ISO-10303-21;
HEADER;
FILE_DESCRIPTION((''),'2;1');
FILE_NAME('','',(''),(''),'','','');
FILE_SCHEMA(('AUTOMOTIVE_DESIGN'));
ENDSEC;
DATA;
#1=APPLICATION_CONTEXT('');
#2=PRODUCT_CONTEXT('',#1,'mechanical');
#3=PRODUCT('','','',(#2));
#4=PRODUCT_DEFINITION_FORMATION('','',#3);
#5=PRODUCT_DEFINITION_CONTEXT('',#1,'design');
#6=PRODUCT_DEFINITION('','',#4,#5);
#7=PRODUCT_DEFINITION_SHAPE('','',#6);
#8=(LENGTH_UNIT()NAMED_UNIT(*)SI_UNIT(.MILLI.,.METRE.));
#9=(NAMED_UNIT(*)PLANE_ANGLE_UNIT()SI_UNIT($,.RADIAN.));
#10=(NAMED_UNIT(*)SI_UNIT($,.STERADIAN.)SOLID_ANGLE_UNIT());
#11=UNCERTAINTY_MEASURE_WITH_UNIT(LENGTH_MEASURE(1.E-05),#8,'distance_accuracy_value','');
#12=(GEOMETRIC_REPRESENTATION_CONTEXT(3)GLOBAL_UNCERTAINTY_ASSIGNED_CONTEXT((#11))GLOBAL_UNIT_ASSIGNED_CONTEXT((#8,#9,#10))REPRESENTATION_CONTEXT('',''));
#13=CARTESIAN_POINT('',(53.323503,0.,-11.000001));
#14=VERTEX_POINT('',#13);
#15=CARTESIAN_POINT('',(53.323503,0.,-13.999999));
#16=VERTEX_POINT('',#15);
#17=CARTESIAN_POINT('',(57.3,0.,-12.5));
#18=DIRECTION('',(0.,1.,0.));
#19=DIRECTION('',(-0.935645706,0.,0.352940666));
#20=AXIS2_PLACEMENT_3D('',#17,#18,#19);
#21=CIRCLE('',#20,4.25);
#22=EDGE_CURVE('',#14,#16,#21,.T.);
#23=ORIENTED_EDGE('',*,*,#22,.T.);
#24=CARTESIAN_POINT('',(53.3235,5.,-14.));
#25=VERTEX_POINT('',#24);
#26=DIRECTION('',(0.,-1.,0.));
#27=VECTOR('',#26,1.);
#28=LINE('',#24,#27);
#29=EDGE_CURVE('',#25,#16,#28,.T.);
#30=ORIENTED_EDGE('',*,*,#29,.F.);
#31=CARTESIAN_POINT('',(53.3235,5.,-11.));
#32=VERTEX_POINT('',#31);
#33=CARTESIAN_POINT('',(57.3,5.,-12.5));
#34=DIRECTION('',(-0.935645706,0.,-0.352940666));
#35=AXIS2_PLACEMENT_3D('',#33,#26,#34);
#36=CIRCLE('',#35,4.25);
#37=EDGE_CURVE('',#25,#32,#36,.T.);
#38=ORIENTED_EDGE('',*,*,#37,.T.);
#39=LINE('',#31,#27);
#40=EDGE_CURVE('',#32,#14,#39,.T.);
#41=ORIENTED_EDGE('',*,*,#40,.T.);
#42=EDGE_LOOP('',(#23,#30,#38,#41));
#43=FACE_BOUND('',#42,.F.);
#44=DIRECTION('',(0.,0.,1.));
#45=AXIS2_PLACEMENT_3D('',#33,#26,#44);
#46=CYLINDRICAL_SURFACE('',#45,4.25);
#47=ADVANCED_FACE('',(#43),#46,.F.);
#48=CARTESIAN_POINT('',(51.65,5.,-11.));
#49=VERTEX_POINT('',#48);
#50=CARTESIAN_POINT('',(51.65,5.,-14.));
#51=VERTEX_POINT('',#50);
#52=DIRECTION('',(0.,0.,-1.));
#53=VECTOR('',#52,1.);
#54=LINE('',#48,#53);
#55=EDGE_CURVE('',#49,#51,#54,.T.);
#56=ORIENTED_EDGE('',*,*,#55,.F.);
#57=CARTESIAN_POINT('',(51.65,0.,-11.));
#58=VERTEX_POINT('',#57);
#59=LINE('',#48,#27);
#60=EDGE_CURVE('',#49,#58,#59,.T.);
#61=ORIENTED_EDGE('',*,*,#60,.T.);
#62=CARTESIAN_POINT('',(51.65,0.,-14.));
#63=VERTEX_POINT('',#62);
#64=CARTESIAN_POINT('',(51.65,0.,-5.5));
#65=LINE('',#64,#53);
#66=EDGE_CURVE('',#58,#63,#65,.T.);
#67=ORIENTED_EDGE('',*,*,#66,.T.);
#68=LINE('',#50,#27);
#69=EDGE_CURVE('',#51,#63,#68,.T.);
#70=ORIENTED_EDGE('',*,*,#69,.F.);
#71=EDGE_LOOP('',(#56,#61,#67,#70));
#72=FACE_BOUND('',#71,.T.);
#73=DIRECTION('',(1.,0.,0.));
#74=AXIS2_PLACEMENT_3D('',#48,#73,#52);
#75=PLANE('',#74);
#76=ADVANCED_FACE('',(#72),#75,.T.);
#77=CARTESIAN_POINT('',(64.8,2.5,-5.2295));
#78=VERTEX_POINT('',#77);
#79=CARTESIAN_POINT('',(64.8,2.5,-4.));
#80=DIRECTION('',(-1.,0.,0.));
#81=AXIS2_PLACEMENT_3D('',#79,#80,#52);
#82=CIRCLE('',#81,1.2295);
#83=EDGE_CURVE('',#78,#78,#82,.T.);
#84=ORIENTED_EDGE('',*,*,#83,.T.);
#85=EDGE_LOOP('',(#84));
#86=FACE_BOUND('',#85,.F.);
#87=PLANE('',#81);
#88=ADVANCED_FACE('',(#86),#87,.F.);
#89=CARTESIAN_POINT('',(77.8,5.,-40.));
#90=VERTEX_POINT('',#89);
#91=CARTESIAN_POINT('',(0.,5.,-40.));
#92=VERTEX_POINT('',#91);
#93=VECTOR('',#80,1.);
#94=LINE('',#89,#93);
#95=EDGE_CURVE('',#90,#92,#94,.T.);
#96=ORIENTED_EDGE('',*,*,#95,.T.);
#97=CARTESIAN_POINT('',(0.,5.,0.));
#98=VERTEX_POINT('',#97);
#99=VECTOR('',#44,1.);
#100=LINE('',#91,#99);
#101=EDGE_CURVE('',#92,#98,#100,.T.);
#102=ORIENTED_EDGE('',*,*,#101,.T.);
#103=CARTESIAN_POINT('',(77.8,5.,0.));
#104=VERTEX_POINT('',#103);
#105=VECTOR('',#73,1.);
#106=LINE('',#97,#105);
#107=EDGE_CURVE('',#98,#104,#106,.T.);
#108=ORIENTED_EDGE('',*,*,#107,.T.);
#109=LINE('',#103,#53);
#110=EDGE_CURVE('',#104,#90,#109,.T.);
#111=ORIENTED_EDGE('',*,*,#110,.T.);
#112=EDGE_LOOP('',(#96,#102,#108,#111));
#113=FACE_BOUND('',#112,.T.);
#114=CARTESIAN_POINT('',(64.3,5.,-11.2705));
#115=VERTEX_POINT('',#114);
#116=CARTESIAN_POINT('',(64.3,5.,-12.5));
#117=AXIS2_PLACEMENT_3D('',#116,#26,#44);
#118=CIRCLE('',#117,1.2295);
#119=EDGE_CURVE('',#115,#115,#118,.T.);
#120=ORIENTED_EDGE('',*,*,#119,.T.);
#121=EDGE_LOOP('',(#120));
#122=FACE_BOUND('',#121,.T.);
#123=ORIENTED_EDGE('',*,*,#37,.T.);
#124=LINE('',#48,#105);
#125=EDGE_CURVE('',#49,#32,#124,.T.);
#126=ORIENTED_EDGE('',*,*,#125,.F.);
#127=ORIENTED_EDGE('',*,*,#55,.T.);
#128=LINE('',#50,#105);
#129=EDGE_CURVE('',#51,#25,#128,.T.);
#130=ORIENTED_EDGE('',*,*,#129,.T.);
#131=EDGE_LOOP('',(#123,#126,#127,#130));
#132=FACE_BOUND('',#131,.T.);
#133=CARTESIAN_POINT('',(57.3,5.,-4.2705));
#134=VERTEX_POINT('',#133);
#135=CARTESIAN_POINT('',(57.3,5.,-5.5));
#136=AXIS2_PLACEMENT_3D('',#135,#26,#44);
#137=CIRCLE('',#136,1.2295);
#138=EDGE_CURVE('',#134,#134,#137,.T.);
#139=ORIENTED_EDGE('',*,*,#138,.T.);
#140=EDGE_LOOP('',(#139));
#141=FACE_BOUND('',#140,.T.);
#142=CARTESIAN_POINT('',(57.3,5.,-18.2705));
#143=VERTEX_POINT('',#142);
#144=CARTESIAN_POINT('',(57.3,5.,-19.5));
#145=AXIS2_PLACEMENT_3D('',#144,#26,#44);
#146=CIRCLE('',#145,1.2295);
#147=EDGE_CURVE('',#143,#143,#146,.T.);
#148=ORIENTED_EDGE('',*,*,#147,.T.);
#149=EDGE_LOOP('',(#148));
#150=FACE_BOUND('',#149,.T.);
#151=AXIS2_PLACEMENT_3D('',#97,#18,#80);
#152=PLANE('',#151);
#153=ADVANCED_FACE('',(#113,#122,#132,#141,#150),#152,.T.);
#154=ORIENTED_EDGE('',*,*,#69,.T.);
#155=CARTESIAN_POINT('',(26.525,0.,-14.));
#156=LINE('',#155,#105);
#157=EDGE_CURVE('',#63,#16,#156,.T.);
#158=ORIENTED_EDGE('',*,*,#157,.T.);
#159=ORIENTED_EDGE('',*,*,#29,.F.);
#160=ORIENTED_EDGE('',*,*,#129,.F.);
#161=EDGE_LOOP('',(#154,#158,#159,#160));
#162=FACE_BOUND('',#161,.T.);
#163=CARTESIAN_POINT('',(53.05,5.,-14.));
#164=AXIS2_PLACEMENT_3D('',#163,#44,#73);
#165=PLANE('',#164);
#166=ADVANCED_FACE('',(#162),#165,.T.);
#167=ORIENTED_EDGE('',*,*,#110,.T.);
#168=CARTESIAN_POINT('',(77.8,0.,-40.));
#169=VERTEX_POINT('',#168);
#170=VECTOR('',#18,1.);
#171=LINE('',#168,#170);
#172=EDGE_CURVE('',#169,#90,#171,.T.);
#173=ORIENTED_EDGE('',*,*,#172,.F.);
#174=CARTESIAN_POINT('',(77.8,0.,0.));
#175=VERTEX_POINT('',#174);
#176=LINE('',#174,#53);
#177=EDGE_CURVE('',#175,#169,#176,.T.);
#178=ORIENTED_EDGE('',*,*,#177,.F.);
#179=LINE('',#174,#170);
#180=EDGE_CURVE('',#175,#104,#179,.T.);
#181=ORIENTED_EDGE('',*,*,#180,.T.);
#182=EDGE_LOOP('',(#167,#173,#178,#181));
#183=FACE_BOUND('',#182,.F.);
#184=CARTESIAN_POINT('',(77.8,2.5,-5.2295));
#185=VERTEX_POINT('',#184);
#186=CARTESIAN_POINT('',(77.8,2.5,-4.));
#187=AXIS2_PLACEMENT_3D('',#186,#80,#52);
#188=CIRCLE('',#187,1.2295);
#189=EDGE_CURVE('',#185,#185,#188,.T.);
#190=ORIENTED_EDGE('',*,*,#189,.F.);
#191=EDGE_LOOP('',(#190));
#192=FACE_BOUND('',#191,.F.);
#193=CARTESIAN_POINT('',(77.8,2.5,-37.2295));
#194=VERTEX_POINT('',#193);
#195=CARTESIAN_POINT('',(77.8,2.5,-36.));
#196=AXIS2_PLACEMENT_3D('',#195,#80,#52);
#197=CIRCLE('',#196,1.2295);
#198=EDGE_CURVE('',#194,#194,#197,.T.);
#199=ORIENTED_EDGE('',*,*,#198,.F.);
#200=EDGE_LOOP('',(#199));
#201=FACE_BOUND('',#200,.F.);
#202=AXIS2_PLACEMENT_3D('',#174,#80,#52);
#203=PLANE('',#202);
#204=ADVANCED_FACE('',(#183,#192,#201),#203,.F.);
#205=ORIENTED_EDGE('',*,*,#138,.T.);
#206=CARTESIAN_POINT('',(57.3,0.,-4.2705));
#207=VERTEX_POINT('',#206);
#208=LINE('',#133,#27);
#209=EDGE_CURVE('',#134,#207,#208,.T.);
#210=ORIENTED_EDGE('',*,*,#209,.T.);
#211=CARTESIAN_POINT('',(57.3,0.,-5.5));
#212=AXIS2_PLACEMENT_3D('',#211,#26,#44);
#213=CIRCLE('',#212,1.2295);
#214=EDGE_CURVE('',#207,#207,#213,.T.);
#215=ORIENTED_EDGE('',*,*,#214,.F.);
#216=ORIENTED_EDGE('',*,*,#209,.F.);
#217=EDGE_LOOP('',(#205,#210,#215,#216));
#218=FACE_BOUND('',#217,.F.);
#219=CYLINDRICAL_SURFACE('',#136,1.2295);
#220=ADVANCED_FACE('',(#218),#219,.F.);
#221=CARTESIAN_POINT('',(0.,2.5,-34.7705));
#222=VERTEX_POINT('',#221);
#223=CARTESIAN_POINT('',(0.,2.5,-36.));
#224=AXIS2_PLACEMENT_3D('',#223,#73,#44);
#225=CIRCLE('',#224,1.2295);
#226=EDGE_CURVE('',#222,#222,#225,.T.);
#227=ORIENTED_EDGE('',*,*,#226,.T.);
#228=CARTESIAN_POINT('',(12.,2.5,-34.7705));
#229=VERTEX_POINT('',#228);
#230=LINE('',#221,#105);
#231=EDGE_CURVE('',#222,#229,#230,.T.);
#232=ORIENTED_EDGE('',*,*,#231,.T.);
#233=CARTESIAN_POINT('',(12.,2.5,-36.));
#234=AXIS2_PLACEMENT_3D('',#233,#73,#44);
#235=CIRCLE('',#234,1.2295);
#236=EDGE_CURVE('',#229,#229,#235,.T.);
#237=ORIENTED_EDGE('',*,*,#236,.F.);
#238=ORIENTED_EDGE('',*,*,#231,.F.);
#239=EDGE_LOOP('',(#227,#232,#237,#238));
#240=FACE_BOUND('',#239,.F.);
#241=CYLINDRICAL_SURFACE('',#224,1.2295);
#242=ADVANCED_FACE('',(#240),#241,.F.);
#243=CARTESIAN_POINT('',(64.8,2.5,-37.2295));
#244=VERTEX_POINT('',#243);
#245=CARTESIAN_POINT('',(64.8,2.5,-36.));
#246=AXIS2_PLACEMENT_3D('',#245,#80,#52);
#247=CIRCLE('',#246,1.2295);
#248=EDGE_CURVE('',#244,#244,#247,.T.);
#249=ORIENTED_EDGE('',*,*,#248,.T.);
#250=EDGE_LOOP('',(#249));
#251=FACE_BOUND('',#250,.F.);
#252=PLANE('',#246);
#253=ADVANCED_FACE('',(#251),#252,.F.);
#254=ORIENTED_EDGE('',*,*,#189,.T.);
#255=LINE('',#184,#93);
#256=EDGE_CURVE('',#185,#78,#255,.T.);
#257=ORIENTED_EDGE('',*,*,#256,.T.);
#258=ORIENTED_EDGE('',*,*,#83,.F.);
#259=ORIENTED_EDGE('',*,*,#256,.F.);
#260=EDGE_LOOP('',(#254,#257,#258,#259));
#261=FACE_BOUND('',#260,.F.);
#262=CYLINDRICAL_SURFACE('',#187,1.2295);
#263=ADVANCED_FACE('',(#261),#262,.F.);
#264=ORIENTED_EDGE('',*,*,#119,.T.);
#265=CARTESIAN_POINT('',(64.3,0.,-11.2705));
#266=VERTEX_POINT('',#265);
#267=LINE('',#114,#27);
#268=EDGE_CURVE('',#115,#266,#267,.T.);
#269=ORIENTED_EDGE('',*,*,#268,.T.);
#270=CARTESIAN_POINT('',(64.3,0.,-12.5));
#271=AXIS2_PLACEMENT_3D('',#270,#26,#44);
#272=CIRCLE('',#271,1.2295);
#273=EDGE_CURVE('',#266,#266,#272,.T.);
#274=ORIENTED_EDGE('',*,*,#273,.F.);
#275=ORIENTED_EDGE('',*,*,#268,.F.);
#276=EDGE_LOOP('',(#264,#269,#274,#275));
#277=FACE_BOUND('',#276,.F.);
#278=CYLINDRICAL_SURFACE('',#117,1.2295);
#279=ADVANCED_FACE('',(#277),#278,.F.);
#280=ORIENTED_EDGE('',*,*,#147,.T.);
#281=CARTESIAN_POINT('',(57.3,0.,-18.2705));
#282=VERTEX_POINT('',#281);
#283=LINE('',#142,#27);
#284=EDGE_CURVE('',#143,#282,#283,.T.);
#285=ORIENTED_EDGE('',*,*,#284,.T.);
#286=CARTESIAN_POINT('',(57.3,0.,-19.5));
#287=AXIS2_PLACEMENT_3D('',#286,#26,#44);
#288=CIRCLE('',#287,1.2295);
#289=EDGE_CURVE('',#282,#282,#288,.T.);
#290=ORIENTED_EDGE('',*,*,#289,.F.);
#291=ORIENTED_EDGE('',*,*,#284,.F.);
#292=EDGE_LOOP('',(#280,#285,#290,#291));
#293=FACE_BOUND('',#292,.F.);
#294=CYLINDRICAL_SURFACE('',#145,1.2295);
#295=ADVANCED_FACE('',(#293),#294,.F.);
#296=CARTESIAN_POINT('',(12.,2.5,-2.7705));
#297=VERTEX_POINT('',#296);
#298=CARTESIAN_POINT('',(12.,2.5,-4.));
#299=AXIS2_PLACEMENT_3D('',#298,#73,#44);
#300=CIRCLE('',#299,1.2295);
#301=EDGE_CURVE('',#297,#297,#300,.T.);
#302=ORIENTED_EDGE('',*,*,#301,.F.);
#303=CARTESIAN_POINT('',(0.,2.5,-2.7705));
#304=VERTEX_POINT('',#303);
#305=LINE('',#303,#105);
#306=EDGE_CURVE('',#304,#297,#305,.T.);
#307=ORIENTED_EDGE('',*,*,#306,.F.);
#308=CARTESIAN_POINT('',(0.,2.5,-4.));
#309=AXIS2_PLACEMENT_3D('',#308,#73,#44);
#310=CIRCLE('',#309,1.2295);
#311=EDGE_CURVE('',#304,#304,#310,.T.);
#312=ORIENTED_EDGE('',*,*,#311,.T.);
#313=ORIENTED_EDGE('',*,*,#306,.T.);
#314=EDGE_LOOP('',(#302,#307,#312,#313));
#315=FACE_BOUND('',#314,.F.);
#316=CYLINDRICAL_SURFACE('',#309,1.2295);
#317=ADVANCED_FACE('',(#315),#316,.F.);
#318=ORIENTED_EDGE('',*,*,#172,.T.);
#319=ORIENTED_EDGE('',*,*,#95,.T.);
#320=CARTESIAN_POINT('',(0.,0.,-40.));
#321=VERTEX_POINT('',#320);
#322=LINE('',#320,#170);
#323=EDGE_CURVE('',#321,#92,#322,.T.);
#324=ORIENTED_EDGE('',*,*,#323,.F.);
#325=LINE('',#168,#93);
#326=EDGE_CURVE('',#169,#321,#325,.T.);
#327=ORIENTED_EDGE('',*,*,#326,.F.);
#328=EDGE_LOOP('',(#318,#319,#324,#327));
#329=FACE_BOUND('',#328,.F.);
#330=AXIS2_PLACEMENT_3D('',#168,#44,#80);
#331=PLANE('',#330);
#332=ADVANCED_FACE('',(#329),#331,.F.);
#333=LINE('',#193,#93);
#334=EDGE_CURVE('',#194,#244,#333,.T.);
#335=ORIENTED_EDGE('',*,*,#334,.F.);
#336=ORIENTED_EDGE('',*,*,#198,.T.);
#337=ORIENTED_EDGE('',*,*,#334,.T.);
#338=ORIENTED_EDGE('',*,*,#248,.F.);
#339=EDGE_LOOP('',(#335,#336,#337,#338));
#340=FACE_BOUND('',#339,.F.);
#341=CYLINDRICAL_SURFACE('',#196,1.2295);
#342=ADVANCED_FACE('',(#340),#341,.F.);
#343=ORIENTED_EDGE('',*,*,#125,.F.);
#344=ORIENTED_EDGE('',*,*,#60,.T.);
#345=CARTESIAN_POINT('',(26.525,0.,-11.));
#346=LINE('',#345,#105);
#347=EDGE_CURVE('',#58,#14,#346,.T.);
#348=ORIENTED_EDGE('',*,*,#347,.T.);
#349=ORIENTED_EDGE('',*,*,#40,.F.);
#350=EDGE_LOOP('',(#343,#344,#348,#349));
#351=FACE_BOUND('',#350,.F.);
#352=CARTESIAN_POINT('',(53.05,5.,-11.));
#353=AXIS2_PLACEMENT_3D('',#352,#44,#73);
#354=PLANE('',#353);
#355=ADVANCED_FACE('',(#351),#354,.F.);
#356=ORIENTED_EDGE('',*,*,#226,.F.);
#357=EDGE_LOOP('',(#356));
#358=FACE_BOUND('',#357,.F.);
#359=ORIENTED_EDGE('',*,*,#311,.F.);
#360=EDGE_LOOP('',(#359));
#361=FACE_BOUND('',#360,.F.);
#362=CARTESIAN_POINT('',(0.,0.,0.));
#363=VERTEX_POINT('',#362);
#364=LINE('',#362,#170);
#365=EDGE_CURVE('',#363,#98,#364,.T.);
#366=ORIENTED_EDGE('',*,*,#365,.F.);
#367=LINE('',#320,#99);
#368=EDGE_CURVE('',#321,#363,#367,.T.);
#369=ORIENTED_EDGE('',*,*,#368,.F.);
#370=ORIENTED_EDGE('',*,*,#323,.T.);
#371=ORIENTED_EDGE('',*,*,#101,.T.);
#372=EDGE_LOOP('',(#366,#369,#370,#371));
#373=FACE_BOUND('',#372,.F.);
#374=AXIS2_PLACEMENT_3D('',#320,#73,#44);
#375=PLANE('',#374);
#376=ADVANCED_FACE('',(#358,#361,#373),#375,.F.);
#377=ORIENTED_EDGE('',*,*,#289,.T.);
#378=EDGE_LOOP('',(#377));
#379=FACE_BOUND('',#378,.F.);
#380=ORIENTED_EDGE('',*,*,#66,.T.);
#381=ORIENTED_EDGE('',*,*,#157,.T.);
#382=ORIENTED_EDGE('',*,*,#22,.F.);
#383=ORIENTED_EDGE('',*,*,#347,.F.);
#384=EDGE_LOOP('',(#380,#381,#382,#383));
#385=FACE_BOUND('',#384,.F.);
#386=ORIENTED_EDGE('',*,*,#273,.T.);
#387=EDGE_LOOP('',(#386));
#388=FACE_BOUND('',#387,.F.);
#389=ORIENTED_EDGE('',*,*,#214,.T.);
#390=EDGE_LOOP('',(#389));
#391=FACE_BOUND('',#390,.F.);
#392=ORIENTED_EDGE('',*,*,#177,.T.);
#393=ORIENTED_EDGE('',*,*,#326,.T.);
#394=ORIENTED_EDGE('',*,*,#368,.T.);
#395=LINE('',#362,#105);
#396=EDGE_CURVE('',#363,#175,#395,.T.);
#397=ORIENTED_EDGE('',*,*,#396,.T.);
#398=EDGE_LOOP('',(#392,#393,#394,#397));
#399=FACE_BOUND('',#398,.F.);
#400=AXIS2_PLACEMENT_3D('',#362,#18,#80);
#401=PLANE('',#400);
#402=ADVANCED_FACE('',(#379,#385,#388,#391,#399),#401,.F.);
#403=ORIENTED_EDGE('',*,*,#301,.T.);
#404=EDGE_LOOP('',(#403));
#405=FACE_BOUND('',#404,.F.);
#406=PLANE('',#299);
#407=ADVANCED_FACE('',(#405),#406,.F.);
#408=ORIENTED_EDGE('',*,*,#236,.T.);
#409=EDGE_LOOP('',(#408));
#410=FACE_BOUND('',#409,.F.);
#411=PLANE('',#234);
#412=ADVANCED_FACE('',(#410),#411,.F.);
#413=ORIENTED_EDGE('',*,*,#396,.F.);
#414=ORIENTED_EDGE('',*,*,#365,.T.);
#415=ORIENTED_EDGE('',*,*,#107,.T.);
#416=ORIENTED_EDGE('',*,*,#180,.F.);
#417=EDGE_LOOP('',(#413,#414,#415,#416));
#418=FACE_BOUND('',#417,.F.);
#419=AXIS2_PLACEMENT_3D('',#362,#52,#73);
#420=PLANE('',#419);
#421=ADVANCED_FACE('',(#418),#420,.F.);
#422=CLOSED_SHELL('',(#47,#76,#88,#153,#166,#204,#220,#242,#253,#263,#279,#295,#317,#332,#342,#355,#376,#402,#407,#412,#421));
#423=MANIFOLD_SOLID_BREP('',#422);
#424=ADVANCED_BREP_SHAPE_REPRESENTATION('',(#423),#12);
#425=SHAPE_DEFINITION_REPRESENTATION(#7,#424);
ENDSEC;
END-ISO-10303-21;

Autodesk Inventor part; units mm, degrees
ref_plane "YZ Plane" through (0, 0, 0) normal (1, 0, 0) x (0, 1, 0)
ref_plane "XZ Plane" through (0, 0, 0) normal (0, 1, 0) x (-1, 0, 0)
ref_plane "XY Plane" through (0, 0, 0) normal (0, 0, 1) x (1, 0, 0)
sketch "スケッチ2" plane through (0, 0, 0) normal (0, 1, 0) x (-1, 0, 0)
  line L0 (0, 0) -> (-77.8, 0)
  line L1 (-77.8, 0) -> (-77.8, -40)
  line L2 (-77.8, -40) -> (0, -40)
  line L3 (0, -40) -> (0, 0)
  dimension "d0" = 77.8
  dimension "d1" = 40
extrude "押し出し1" add sketch "スケッチ2" along normal blind 5
sketch "スケッチ4" plane through (0, 0, -40) normal (-1, 0, 0) x (0, 0, 1)
  line L0 (0, 0) -> (0, 5) construction
  line L1 (0, 2.5) -> (40, 2.5) construction
  line L2 (40, 0) -> (40, 5) construction
  point P0 (4, 2.5)
  point P1 (36, 2.5)
  dimension "d4" = 4
  dimension "d5" = 4
hole "穴1" at (0, 2.5, -36) at (0, 2.5, -4) direction (1, 0, 0) diameter 2.459 depth 12 thread size "M3x0.5" class "6H" standard "ISO Metric profile"
sketch "スケッチ5" plane through (77.8, 0, 0) normal (1, 0, 0) x (0, 0, -1)
  line L0 (0, 0) -> (0, 5) construction
  line L1 (0, 2.5) -> (39.9198, 2.5) construction
  circle A0 centre (4, 2.5) radius 1.2295 construction
  circle A1 centre (36, 2.5) radius 1.2295 projected
  point P0 (4, 2.5)
  point P1 (36, 2.5)
hole "穴2" at (77.8, 2.5, -4) at (77.8, 2.5, -36) direction (-1, 0, 0) diameter 2.459 depth 13 thread size "M3x0.5" class "6H" standard "ISO Metric profile"
sketch "スケッチ6" plane through (0, 5, 0) normal (0, 1, 0) x (1, 0, 0)
  line L0 (77.8, 0) -> (77.8, 40) construction
  line L1 (0, 40) -> (0, 0) construction
  line L2 (0, 0) -> (77.8, 0) construction
  point P0 (57.3, 12.5)
  dimension "d20" = 20.5
  dimension "d21" = 12.5
hole "穴3" at (57.3, 5, -12.5) direction (0, -1, 0) diameter 8.5 end through all
sketch "スケッチ7" plane through (0, 5, 0) normal (0, 1, 0) x (1, 0, 0)
  line L0 (77.8, 0) -> (77.8, 40) construction
  line L1 (77.8, 28.3) -> (0, 28.3) construction
  line L2 (0, 40) -> (0, 0) construction
  circle A0 centre (57.3, 12.5) radius 4.25 construction
  point P0 (67.8, 28.3)
  point P1 (46.8, 28.3)
  dimension "d29" = 15.8
  dimension "d30" = 10.5
  dimension "d31" = 10.5
hole "穴4" [suppressed]
sketch "スケッチ8" plane through (0, 5, 0) normal (0, 1, 0) x (1, 0, 0)
  circle A0 centre (57.3, 12.5) radius 4.25 construction
  circle A1 centre (57.3, 12.5) radius 7 construction
  point P0 (0, 0)
  point P1 (64.3, 12.5)
  point P2 (57.3, 19.5)
  point P3 (57.3, 5.5)
  dimension "d39" = 14
hole "穴5" at (64.3, 5, -12.5) at (57.3, 5, -19.5) at (57.3, 5, -5.5) direction (0, -1, 0) diameter 2.459 end through all thread size "M3x0.5" class "6H" standard "ISO Metric profile"
sketch "スケッチ9" plane through (0, 5, 0) normal (0, 1, 0) x (1, 0, 0)
  circle A0 centre (57.3, 12.5) radius 4.25 projected
  line L0 (57.3, 12.5) -> (45.9478, 12.5) construction
  line L1 (51.65, 14) -> (53.05, 14)
  line L2 (53.05, 14) -> (53.05, 11)
  line L3 (53.05, 11) -> (51.65, 11)
  line L4 (51.65, 11) -> (51.65, 14)
  line L5 (51.65, 14) -> (53.05, 11) construction
  line L6 (53.05, 14) -> (51.65, 11) construction
  line L7 (53.05, 11) -> (53.3235, 11)
  line L8 (53.05, 14) -> (53.3235, 14)
  point P0 (0, 0)
  point P1 (52.35, 12.5)
  dimension "d56" = 1.4
  dimension "d57" = 0
  dimension "d58" = 3
extrude "押し出し2" cut sketch "スケッチ9" against normal blind 10 contours A0 L2 L8 | L7 L2 A0 | L2 L3 L4 L1
properties part number "shoulder1_verticval_right_cover" material "アルミニウム 5052"
